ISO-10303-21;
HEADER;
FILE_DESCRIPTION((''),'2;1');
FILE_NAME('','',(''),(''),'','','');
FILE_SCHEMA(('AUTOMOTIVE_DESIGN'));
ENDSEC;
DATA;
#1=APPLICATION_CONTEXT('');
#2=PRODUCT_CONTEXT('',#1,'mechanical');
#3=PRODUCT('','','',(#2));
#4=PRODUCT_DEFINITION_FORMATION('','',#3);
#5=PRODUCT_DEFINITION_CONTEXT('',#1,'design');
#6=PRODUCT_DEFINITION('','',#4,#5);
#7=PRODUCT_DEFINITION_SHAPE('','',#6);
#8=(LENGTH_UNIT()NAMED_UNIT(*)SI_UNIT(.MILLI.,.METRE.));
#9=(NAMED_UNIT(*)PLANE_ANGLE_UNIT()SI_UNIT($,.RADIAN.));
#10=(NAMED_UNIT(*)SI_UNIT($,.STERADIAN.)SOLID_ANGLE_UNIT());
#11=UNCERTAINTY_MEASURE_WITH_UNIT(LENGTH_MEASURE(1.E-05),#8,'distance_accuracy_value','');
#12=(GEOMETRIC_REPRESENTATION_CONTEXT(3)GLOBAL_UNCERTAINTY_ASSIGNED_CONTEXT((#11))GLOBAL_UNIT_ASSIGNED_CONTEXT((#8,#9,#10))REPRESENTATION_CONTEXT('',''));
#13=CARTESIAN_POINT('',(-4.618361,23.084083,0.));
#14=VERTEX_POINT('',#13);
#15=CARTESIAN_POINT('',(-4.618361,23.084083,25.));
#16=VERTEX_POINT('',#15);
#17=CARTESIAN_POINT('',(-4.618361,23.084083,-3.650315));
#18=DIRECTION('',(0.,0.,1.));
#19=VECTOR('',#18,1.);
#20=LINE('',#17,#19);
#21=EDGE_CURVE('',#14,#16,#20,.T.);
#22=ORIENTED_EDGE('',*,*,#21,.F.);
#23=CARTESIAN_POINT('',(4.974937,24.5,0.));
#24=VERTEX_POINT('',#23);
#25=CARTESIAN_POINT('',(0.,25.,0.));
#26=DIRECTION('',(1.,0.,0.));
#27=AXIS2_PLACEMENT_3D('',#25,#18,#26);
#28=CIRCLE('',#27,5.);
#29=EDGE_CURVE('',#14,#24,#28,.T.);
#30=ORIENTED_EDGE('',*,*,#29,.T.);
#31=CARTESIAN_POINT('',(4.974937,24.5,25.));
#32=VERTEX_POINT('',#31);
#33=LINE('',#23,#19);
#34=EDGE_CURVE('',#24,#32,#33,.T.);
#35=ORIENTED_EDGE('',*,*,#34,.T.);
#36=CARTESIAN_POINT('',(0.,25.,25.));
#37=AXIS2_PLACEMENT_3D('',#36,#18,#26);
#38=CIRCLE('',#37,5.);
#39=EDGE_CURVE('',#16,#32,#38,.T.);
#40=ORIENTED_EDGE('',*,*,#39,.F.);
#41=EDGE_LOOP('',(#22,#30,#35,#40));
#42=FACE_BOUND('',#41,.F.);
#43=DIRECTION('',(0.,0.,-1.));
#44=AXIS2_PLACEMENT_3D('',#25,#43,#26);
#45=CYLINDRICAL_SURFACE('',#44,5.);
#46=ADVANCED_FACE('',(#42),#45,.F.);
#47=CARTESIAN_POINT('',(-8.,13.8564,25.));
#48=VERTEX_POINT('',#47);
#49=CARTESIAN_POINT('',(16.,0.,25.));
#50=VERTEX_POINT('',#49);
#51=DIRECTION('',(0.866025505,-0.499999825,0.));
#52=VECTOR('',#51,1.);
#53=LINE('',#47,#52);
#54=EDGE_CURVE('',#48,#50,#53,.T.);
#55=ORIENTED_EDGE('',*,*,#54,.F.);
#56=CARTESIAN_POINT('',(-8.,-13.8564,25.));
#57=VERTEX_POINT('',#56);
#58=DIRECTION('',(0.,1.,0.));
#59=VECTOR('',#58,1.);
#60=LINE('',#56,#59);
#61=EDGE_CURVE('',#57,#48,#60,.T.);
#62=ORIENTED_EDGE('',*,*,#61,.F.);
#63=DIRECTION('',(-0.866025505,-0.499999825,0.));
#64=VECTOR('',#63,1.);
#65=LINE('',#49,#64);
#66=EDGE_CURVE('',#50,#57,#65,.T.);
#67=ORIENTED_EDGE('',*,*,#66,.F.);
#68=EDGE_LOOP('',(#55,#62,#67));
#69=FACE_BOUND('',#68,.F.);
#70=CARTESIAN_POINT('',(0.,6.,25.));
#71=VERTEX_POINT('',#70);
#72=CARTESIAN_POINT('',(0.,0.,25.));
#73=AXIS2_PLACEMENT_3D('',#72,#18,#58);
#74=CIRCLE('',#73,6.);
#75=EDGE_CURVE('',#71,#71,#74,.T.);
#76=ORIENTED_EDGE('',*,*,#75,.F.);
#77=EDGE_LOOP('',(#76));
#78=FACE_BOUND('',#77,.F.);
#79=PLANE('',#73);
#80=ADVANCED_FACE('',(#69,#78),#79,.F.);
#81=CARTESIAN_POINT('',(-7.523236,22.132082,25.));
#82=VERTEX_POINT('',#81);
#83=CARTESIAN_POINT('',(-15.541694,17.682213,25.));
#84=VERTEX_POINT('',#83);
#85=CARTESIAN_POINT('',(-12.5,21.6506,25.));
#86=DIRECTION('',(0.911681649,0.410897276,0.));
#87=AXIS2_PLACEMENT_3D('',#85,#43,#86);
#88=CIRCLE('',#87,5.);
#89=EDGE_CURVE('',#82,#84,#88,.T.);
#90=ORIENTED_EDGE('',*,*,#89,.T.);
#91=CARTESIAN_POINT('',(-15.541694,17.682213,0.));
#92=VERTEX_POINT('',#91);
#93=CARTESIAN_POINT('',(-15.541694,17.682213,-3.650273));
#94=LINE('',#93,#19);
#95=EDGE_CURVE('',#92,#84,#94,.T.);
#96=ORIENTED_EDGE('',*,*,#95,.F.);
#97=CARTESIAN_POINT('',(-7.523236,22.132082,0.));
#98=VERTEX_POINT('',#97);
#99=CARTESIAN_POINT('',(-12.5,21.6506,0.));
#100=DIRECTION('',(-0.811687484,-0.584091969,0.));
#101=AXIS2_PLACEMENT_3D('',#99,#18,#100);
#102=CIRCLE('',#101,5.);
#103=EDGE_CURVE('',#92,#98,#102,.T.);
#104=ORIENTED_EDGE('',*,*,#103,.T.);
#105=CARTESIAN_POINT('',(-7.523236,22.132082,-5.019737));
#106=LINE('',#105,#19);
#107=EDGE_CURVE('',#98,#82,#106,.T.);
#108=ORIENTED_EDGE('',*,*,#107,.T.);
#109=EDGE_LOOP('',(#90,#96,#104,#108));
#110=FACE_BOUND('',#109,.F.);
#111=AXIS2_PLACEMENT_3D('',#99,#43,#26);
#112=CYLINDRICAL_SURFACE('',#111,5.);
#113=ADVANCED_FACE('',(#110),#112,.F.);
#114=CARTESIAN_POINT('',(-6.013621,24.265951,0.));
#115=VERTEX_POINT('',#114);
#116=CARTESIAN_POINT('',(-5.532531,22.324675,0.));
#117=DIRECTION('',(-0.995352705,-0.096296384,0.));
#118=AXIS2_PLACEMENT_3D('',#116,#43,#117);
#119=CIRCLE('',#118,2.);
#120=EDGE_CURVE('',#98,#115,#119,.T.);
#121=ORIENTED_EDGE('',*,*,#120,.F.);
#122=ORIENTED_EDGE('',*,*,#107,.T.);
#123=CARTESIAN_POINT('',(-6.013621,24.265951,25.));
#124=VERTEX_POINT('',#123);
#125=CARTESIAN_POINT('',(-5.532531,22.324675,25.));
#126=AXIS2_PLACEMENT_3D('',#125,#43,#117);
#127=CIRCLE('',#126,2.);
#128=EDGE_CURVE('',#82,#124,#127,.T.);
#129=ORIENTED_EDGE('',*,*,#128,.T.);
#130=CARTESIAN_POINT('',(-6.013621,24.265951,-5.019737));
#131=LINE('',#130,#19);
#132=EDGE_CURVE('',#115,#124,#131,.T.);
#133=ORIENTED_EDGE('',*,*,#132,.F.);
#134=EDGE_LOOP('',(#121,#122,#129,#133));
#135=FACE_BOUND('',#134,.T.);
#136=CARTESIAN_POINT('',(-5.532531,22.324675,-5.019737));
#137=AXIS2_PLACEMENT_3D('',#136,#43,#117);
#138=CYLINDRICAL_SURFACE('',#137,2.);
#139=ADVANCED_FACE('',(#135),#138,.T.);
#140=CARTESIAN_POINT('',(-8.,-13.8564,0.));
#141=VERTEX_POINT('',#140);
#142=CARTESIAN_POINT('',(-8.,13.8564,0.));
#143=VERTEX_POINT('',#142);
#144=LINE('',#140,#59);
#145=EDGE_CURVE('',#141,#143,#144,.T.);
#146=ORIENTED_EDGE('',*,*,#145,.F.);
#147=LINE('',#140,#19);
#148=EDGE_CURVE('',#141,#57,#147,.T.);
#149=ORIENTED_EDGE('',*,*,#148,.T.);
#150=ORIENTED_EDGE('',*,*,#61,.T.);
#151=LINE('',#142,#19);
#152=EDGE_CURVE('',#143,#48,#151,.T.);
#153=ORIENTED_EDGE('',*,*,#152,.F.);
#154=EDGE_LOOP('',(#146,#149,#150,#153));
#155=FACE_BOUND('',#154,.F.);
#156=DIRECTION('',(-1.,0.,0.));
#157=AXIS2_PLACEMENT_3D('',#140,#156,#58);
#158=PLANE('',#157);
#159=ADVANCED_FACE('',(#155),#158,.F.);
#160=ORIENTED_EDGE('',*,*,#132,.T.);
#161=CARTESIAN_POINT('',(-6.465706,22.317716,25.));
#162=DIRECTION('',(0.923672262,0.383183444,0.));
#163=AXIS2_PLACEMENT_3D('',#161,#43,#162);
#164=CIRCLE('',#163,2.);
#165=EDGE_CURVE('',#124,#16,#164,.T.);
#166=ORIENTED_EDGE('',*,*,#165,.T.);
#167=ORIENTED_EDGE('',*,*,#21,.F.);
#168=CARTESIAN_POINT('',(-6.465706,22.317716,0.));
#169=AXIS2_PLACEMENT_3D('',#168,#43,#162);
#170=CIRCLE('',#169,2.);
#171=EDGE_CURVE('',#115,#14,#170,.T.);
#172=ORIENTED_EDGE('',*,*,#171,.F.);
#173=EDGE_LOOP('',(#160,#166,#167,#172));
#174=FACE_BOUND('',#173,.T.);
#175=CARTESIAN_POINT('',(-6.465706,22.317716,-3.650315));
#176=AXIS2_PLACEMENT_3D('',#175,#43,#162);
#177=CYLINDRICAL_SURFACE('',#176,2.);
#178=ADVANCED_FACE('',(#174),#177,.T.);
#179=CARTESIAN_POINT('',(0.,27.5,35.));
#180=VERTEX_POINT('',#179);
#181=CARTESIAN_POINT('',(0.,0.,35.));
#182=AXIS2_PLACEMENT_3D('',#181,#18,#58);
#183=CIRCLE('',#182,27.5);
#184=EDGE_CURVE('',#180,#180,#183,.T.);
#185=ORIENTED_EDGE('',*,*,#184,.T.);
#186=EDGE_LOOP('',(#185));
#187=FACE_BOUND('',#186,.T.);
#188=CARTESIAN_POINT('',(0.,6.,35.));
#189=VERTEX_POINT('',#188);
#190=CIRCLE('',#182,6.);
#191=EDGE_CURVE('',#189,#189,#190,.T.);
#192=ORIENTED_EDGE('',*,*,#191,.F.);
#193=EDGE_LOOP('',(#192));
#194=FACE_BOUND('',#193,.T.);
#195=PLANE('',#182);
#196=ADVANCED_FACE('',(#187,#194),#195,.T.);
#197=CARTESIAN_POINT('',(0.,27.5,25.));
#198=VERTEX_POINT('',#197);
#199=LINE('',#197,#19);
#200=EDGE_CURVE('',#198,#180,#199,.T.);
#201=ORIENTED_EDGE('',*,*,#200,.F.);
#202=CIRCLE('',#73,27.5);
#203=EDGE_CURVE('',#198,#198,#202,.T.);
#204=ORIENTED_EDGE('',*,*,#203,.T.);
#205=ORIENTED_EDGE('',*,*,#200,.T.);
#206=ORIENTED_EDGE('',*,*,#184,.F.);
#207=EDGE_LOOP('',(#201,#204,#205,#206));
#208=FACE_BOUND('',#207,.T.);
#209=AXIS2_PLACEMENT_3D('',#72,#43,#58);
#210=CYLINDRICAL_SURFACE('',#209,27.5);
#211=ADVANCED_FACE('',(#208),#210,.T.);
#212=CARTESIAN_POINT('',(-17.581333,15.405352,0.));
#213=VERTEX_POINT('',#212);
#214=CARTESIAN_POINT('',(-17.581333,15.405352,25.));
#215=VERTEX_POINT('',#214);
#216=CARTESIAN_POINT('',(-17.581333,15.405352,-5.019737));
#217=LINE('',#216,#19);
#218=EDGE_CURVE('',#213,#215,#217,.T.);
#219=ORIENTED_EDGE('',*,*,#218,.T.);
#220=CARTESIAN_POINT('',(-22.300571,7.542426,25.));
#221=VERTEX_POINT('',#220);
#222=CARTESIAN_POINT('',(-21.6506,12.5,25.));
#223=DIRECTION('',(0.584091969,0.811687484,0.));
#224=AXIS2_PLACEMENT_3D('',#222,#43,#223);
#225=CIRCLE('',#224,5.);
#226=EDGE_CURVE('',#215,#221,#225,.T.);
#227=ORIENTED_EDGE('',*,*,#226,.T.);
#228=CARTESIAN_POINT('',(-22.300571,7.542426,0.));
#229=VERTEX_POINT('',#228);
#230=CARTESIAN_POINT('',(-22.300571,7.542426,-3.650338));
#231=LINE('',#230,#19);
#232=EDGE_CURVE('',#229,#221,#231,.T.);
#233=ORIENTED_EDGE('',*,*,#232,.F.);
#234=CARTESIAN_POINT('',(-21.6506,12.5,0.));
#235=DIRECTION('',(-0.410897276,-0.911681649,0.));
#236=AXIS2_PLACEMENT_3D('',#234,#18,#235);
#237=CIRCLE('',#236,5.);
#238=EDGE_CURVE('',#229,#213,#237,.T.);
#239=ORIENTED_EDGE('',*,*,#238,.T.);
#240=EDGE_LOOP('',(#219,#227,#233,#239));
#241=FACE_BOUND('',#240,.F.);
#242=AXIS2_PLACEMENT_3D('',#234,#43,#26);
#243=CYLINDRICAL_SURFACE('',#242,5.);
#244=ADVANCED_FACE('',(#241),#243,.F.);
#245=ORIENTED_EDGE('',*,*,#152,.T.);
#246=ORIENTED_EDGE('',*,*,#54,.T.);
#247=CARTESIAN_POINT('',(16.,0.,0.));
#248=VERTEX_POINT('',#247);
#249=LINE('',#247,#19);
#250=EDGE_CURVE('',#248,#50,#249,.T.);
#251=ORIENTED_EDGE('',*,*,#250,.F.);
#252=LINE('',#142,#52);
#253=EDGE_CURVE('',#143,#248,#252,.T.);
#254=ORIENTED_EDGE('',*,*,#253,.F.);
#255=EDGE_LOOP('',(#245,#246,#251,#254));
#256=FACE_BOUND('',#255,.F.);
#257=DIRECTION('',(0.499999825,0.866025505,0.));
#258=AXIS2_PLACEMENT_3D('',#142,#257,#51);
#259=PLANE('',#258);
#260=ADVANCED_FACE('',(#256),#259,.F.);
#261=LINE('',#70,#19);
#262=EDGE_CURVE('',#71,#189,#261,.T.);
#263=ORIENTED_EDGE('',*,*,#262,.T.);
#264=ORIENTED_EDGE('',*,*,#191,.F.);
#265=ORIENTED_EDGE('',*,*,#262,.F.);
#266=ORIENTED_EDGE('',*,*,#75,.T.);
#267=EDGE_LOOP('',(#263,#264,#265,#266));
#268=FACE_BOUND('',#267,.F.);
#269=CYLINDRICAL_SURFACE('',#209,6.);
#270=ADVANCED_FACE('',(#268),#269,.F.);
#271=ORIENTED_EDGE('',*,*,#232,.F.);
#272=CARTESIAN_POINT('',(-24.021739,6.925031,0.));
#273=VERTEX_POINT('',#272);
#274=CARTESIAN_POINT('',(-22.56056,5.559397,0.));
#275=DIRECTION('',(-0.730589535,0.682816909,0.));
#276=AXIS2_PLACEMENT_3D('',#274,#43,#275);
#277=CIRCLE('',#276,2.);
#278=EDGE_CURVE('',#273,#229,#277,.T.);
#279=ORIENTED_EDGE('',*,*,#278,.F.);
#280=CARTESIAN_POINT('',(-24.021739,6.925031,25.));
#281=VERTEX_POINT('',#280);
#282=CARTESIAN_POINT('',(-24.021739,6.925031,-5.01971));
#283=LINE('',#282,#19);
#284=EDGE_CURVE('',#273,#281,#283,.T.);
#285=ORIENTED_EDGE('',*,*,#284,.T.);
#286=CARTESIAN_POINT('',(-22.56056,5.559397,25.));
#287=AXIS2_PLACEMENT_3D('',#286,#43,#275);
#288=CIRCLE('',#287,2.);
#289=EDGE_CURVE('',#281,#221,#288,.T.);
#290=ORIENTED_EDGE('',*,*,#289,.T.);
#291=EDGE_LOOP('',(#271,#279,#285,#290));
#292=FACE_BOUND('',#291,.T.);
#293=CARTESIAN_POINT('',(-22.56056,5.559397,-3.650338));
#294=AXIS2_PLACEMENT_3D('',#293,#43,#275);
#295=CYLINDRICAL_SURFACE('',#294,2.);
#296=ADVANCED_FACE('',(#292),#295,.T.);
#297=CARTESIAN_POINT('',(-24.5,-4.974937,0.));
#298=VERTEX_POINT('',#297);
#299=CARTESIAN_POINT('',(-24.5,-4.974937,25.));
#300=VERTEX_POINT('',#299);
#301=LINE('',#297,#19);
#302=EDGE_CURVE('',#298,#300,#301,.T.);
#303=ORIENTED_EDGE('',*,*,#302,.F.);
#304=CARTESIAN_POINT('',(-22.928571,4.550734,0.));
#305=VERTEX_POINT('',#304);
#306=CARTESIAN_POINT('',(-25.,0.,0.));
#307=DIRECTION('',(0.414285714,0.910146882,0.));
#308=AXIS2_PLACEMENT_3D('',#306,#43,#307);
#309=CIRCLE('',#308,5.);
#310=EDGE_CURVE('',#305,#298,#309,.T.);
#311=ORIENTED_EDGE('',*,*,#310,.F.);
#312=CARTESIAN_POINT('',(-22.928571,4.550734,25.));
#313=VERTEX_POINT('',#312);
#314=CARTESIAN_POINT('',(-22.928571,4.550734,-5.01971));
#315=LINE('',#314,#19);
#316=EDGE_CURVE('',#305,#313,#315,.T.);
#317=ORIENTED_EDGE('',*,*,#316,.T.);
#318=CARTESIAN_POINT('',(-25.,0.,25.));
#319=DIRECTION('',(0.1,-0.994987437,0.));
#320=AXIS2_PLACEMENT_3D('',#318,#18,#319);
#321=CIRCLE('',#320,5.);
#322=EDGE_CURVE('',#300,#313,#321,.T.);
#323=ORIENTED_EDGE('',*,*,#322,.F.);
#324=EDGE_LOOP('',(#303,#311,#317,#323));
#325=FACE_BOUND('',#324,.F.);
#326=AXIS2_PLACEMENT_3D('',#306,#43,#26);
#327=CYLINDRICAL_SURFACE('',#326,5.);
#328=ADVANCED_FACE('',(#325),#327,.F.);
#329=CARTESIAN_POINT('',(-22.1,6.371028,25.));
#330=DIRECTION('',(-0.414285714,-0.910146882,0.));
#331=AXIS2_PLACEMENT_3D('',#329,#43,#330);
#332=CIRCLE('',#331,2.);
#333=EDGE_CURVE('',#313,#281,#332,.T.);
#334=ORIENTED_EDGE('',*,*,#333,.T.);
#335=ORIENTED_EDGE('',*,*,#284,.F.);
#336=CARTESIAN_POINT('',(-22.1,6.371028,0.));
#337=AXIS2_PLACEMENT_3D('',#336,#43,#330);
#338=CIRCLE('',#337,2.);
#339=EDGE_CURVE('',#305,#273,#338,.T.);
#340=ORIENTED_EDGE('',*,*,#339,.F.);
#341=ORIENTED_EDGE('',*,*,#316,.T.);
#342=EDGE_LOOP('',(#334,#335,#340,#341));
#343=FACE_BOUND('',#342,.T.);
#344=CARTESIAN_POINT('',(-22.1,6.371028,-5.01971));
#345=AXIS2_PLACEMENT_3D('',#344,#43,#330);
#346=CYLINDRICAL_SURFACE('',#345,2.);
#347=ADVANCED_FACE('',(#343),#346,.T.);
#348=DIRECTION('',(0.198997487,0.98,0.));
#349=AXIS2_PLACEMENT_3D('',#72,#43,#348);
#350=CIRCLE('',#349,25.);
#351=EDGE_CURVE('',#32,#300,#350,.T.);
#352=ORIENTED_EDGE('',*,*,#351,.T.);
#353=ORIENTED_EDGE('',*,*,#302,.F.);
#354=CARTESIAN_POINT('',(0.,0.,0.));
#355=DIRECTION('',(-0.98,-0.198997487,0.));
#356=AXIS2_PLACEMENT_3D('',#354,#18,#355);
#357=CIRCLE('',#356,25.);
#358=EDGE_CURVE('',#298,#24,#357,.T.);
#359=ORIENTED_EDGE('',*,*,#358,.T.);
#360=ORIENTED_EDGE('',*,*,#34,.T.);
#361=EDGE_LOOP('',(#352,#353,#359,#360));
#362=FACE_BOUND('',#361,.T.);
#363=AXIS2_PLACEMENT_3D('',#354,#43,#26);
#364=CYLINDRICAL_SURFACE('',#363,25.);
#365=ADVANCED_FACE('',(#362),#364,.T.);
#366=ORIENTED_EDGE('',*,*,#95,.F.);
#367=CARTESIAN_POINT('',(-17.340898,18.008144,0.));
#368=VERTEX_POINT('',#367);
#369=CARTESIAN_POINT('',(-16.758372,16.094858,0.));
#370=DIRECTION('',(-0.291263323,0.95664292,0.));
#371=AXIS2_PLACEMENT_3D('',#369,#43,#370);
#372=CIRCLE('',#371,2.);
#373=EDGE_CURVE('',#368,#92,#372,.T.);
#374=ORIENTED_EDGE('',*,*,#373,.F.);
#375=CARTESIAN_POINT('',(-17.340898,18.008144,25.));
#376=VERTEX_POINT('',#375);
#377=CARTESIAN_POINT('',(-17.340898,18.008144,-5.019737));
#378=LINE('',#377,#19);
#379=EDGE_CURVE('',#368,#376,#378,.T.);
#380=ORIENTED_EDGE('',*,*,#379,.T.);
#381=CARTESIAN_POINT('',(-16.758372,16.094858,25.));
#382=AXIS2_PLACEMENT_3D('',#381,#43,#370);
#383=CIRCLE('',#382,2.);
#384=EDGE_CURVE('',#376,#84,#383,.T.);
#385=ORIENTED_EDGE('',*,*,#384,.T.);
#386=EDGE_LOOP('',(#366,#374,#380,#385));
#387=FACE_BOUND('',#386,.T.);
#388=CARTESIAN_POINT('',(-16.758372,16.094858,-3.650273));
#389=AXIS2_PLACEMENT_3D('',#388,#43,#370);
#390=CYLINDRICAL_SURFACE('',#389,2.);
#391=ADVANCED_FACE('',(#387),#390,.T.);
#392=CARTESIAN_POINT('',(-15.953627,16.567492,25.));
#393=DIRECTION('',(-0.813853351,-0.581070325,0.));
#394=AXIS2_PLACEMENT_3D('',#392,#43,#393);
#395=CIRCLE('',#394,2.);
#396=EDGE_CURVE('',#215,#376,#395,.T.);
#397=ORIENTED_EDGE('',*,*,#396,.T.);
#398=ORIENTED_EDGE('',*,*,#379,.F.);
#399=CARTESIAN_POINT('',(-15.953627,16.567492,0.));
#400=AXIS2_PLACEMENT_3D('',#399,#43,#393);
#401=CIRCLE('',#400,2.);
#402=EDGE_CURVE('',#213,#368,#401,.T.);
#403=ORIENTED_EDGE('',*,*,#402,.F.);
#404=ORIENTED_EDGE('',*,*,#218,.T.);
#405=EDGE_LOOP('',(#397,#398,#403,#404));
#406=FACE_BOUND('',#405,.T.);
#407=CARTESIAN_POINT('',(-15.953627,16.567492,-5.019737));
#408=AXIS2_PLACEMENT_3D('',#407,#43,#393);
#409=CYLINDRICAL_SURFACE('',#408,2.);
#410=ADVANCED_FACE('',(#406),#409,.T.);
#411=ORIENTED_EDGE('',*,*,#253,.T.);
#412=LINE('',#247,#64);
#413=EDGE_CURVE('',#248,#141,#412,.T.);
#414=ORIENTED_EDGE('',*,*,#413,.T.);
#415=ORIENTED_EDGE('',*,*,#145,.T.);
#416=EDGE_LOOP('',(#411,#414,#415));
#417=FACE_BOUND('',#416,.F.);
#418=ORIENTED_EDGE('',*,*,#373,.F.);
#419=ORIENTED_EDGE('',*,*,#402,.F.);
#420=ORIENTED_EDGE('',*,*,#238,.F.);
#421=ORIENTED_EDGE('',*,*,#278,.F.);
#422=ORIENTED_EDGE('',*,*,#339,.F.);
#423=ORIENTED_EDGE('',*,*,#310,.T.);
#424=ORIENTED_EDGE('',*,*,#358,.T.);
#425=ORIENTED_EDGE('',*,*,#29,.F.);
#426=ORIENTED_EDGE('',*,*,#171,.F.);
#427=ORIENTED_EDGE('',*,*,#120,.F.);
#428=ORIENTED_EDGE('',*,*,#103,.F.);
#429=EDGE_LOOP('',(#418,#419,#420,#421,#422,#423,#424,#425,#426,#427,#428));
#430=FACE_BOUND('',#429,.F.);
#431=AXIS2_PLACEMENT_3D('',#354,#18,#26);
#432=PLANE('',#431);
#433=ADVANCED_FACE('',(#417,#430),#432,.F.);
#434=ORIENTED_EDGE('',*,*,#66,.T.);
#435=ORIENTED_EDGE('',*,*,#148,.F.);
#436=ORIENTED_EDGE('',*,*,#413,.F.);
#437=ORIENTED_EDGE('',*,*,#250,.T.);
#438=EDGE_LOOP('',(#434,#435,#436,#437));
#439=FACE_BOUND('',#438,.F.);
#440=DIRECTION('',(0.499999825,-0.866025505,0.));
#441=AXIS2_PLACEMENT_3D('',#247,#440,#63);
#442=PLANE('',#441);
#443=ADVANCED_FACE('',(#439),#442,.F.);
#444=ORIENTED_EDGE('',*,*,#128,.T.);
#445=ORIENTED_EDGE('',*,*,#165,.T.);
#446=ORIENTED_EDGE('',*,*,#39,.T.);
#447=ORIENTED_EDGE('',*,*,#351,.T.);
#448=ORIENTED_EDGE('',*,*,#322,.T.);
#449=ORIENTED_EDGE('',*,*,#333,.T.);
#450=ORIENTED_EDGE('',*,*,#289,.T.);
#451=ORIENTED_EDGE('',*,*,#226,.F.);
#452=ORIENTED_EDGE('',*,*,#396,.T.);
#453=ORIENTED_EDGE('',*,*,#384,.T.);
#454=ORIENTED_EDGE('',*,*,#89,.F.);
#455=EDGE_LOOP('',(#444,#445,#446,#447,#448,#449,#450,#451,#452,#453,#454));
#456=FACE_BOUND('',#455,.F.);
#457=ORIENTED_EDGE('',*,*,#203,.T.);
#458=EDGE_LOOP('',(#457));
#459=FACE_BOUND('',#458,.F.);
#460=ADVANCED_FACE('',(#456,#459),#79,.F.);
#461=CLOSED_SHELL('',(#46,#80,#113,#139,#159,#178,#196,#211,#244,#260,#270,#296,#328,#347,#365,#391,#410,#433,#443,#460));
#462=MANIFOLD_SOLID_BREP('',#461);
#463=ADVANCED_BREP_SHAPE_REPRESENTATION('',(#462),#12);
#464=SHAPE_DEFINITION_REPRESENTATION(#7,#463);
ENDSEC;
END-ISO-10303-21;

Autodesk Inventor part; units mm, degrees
ref_plane "YZ Plane" through (0, 0, 0) normal (1, 0, 0) x (0, 1, 0)
ref_plane "XZ Plane" through (0, 0, 0) normal (0, 1, 0) x (-1, 0, 0)
sketch "Sketch1" plane through (0, 0, 0) normal (0, 0, 1) x (1, 0, 0)
  circle A0 centre (0, 0) radius 27.5 projected
  circle A1 centre (0, 0) radius 35
  line L0 (16, 0) -> (-8, -13.8564)
  line L1 (-8, 13.8564) -> (16, 0)
  line L2 (-8, -13.8564) -> (-8, 13.8564)
  circle A2 centre (0, 0) radius 25
  circle A3 centre (-25, 0) radius 5
  circle A4 centre (-21.6506, 12.5) radius 5
  circle A5 centre (-12.5, 21.6506) radius 5
  circle A6 centre (0, 25) radius 5
  circle A7 centre (0, 0) radius 38 projected
  point P0 (4.9749, 24.5)
  point P1 (-4.9749, 24.5)
  point P2 (-7.9416, 23.7051)
  point P3 (-16.5584, 18.7302)
  point P4 (-18.7302, 16.5584)
  point P5 (-23.7051, 7.9416)
  point P6 (-24.5, 4.9749)
  point P7 (-24.5, -4.9749)
  dimension "d5" = 70
  dimension "d14" = 10
  dimension "d15" = 10
  dimension "d18" = 90
ref_plane "Work Plane7" through (-38, -38, 25) normal (0, 0, -1) x (0, 1, 0)
extrude "Extrusion1" add sketch "Sketch1" along normal up to surface (25 mm away) contours A3 A2 A4 A5 A6
fillet "Fillet1" radius 2 6 edges at (-24.5, 4.9749, 12.5) (-23.7051, 7.9416, 12.5) (-18.7302, 16.5584, 12.5) (-16.5584, 18.7302, 12.5) (-7.9416, 23.7051, 12.5) (-4.9749, 24.5, 12.5)
sketch "Sketch3" plane through (0, 0, 25) normal (0, 0, 1) x (0, 1, 0)
  circle A0 centre (0, 0) radius 28 projected
  circle A1 centre (0, 0) radius 6
  circle A2 centre (0, 0) radius 27.5
  dimension "d13" = 0.5
extrude "Extrusion3" add sketch "Sketch3" along normal blind 10 contours A2
properties part number "handle_base2"
